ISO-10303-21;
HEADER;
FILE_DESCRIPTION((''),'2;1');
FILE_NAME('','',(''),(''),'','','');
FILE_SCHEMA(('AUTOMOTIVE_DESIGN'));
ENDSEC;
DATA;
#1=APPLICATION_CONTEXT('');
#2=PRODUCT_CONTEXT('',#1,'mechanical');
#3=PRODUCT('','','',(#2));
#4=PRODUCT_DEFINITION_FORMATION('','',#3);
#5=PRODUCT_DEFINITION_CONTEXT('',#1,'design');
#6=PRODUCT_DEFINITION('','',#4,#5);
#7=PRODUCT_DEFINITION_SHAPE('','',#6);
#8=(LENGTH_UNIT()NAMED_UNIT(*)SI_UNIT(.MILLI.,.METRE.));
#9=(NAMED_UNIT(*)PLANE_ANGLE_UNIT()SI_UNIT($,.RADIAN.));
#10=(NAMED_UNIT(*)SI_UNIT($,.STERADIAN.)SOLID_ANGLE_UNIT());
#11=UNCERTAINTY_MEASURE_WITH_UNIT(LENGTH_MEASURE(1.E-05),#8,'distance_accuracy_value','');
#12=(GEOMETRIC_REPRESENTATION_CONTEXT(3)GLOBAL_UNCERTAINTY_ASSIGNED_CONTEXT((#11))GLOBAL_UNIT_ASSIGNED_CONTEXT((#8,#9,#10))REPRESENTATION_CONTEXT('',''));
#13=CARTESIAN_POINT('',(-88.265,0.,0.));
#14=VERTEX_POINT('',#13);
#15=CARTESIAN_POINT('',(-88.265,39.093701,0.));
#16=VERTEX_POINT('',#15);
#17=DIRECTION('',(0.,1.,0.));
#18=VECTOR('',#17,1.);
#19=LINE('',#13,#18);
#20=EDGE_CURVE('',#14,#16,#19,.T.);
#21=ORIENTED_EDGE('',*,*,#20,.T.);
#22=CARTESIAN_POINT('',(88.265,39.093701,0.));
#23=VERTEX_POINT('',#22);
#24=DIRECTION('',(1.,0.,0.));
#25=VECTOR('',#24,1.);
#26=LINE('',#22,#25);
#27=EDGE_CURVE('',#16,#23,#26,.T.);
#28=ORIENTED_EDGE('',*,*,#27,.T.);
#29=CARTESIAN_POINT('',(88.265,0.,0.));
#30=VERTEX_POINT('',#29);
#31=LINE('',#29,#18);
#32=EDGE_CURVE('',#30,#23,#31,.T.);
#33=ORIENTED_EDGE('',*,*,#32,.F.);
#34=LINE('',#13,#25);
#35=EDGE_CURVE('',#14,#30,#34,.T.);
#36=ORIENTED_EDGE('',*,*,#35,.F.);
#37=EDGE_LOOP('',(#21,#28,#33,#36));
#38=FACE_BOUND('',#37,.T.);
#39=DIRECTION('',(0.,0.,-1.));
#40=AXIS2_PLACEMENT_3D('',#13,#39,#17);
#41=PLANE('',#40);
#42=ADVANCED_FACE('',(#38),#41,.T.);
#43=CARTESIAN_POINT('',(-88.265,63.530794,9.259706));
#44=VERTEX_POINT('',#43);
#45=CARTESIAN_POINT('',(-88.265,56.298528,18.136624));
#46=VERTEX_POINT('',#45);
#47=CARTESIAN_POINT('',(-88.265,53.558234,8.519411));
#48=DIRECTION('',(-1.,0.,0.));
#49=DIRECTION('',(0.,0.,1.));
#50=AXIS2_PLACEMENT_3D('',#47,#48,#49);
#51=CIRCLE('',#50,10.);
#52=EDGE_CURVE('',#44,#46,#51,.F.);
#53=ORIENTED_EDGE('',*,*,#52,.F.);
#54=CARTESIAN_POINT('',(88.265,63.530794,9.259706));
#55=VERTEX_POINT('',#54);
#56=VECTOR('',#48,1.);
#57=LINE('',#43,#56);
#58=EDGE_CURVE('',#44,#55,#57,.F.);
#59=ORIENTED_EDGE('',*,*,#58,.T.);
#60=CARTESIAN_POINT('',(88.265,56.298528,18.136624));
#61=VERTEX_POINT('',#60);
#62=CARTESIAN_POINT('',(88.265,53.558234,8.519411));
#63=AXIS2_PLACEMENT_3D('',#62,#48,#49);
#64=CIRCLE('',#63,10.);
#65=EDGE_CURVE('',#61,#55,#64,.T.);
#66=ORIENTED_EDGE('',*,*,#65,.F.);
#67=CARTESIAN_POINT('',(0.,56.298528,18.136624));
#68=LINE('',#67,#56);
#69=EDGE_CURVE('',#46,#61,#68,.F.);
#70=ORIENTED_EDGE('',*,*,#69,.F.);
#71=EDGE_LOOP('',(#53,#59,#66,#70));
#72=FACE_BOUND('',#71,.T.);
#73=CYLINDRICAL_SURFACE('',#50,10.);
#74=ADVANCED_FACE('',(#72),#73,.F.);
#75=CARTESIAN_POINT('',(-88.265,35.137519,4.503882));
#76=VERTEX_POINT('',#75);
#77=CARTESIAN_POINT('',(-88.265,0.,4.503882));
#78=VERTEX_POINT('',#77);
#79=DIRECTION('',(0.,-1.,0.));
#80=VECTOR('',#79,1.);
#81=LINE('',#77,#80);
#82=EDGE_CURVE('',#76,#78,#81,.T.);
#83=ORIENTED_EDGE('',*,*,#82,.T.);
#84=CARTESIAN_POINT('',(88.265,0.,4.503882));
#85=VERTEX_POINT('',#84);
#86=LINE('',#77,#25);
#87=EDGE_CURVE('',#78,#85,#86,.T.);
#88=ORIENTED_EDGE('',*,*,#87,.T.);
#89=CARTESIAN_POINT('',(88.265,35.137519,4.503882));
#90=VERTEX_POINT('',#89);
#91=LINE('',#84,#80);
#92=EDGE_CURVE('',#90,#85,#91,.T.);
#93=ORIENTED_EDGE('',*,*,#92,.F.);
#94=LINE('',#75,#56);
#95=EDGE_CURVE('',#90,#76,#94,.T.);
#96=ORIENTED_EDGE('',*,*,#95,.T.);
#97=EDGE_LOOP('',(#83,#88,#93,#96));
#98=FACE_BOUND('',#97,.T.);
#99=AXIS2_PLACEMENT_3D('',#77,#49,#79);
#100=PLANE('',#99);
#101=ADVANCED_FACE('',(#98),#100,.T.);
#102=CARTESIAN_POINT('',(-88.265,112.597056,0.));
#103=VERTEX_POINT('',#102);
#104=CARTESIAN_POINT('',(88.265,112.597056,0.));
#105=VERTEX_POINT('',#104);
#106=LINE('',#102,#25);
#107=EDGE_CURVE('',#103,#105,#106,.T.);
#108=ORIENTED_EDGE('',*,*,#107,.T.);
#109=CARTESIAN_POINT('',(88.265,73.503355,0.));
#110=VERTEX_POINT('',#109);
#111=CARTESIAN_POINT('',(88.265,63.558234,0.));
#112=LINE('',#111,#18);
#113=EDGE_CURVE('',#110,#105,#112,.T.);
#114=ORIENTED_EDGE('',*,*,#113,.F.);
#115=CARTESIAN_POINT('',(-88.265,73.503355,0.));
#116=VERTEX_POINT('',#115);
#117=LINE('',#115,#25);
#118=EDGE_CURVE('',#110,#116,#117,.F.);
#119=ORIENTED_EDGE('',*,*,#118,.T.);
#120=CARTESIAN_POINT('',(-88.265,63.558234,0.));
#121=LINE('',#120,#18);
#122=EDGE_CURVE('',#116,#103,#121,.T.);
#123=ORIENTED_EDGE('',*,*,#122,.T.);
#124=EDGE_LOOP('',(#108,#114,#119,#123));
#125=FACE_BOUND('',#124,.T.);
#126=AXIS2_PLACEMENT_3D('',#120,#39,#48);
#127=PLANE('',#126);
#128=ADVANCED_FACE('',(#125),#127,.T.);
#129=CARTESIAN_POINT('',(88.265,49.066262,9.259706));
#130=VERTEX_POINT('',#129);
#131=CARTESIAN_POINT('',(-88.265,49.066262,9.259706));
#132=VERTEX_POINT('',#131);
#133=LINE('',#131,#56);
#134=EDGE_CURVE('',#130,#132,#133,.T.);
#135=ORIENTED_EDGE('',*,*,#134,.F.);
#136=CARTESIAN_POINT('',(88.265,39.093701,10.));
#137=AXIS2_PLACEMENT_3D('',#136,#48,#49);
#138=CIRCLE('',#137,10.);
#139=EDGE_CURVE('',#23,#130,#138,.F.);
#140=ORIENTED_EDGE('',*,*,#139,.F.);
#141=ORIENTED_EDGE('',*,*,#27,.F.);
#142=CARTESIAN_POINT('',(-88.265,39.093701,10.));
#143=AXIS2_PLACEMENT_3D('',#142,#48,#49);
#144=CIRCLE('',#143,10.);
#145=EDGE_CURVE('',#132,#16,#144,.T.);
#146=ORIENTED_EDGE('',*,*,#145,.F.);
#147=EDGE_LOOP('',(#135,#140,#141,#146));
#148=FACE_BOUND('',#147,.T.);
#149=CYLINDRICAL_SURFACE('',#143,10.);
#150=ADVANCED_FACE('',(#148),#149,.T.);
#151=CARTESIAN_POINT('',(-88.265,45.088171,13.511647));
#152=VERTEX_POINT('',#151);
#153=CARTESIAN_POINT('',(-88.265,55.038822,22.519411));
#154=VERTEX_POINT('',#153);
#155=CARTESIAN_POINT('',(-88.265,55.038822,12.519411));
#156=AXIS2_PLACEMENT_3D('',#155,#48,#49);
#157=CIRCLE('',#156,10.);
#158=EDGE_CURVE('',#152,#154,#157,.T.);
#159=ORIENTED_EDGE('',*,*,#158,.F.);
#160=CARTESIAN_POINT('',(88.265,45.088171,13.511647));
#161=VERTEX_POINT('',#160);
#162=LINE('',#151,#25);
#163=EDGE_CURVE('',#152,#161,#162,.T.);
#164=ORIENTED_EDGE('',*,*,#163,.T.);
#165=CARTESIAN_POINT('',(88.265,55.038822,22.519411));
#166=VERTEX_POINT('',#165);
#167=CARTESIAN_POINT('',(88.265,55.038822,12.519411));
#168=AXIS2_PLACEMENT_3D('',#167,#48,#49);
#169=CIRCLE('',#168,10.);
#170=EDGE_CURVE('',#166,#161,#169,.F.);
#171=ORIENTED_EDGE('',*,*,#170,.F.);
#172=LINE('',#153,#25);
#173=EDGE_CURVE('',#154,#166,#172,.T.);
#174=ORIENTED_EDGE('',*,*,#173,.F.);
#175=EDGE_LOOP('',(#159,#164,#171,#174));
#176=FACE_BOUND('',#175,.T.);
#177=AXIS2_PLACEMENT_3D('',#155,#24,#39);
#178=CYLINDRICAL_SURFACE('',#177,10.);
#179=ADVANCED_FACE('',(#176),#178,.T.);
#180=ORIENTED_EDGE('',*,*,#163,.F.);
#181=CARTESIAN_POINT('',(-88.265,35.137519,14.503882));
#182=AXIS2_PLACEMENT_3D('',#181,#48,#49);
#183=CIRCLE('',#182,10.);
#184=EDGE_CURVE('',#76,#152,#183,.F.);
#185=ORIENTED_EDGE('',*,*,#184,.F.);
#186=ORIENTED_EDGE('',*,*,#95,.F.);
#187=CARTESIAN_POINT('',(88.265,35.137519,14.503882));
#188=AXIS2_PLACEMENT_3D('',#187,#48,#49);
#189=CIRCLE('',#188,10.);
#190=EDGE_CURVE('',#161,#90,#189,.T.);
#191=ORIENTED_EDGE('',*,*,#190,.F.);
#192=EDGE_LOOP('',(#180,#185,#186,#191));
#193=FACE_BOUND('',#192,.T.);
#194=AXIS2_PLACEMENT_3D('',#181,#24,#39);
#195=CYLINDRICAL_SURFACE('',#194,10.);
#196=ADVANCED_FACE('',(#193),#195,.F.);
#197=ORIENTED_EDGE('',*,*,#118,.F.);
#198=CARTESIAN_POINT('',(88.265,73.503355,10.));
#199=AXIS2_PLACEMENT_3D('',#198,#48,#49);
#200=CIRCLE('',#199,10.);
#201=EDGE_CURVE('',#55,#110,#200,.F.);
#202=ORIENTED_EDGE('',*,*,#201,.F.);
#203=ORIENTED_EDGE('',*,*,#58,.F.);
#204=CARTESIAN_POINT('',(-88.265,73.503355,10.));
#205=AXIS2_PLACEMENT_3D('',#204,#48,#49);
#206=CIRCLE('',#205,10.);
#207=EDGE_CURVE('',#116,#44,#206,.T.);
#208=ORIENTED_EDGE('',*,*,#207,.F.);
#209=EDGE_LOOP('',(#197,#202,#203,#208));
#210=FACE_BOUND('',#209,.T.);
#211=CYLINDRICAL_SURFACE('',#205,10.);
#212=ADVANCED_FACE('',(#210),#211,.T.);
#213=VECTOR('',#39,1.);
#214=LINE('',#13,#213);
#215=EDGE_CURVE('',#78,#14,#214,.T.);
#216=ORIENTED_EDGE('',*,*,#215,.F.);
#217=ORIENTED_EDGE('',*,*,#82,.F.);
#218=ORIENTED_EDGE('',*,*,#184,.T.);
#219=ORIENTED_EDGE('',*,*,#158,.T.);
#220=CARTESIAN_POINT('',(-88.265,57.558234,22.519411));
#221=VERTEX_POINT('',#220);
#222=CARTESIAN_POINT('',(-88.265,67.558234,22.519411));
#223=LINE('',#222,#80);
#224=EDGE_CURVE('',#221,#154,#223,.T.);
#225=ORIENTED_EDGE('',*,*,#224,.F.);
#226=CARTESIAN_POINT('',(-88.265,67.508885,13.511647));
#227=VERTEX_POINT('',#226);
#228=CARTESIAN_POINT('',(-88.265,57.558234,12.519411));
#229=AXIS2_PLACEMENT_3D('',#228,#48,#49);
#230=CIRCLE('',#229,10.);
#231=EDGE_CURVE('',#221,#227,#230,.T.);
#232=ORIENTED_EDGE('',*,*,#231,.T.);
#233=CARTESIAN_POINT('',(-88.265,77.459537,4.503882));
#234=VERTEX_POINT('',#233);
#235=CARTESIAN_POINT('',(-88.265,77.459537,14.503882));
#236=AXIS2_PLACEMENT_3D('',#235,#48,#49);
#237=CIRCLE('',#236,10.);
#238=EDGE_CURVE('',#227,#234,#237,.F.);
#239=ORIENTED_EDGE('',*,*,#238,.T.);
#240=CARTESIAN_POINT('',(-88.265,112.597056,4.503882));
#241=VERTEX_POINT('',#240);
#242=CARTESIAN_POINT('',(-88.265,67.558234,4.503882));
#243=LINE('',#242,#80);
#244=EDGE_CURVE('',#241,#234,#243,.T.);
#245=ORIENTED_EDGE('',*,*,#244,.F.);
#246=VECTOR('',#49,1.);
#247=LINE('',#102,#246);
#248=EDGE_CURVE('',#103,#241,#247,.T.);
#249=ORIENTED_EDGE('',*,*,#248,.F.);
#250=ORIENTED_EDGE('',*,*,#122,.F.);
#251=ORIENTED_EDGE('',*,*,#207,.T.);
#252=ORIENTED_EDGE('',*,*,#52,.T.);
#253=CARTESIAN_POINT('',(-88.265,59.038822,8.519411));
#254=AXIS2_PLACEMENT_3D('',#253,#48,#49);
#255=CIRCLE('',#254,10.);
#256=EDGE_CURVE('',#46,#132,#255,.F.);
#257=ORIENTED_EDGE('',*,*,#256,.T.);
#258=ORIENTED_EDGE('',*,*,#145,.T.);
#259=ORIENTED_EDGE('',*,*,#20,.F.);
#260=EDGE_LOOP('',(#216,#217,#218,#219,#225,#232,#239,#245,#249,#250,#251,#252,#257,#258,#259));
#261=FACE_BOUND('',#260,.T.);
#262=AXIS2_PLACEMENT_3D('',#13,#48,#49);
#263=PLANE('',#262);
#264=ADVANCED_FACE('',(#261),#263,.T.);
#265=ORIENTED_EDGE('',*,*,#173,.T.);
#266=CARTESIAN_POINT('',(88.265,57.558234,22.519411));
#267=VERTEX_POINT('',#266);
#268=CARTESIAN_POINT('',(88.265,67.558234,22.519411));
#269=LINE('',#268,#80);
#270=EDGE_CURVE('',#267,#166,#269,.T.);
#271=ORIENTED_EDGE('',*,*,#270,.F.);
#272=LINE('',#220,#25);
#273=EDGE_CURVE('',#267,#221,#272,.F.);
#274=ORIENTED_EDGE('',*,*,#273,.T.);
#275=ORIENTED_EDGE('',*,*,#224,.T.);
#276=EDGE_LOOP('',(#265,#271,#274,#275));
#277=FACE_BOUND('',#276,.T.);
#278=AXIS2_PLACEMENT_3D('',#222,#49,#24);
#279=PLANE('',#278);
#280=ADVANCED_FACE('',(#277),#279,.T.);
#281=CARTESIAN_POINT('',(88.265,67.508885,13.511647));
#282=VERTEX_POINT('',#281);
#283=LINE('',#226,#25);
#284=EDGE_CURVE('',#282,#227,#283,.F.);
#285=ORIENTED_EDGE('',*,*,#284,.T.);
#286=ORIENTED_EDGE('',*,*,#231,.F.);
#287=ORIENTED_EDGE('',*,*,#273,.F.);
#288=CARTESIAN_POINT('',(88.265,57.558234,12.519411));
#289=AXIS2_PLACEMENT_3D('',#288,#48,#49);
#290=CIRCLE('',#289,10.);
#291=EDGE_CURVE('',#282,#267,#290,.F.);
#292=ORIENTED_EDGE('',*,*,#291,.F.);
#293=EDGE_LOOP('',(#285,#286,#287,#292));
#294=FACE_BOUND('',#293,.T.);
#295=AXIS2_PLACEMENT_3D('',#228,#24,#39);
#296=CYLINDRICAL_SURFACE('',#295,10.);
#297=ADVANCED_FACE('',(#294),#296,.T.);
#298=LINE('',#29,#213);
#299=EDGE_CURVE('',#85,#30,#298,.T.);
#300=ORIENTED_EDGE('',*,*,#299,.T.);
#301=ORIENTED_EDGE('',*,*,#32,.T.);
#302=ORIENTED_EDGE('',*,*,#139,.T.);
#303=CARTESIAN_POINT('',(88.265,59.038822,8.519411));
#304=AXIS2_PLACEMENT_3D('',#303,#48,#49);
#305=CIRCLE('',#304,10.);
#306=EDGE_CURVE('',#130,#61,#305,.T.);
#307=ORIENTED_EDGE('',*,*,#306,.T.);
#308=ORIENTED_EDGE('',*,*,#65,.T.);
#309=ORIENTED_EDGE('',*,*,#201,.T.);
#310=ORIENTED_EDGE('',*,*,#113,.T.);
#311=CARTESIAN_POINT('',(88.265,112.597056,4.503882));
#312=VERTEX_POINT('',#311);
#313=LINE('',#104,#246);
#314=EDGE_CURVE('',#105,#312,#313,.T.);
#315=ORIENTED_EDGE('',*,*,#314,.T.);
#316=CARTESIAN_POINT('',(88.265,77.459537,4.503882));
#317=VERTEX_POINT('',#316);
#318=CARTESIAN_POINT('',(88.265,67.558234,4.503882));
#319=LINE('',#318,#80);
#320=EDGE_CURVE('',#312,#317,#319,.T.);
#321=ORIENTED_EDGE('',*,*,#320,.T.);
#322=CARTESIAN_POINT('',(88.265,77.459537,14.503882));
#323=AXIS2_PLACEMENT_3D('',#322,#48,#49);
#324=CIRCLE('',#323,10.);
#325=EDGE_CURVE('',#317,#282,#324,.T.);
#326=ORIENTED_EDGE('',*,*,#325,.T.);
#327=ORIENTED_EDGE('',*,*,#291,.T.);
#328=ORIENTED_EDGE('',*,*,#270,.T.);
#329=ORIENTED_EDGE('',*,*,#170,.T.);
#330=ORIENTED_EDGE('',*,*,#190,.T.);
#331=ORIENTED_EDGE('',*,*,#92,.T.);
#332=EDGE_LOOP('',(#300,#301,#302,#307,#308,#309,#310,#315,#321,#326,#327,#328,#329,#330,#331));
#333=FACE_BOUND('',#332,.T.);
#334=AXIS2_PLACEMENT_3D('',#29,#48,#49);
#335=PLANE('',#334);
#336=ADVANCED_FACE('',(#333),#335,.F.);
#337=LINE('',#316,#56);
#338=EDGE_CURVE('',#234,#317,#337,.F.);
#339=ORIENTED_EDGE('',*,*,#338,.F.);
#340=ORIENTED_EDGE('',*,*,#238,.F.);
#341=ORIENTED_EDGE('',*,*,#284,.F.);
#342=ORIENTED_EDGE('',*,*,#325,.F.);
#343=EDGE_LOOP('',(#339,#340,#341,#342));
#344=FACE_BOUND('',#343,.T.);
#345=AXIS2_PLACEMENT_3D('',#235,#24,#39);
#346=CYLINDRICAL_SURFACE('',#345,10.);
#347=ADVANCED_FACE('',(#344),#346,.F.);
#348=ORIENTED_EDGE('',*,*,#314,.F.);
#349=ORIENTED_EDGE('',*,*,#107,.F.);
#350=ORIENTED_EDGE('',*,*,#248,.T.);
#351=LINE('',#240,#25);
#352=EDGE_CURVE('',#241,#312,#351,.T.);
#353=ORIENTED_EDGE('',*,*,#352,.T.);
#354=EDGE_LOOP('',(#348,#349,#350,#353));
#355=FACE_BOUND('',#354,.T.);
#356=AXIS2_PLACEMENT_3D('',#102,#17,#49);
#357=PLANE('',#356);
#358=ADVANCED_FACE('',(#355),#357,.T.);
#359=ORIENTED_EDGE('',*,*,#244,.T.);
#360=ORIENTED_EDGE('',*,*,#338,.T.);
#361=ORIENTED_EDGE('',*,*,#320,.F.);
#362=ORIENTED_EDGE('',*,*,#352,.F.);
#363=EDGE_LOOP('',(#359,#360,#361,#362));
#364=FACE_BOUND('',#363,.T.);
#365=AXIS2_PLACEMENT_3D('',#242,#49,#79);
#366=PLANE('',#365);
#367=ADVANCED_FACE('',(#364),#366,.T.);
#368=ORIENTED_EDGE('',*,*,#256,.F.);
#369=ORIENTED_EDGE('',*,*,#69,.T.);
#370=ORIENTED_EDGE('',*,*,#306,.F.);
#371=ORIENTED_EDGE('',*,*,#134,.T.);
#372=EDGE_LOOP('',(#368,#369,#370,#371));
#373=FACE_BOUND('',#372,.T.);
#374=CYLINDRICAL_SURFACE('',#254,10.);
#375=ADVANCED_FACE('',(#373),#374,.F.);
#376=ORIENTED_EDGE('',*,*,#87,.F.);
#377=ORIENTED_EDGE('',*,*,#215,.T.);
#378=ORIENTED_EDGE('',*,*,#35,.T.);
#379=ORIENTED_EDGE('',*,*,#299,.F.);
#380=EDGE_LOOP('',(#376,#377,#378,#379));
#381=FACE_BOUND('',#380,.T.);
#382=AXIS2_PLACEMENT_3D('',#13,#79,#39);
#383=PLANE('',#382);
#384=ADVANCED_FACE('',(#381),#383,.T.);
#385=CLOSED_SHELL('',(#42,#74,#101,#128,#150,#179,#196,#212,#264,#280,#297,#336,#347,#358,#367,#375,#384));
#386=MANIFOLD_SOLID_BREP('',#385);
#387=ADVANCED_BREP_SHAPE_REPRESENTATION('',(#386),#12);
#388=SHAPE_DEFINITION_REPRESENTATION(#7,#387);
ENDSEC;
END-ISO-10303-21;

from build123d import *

# Parameters (mm, degrees)
SM_START               = -88.265
SM_BASE_FLANGE_1_DEPTH = 176.53
FILLET_3_R             = 10
FILLET_4_R             = 10
FILLET_5_R             = 10
FILLET_6_R             = 10
FILLET_7_R             = 10


# Read off the part's stored shape, not the designer's step: 基体-法兰1
with BuildPart() as part:
    # 基体-法兰1 outline → 基体-法兰1 (new body)
    with BuildSketch(Plane(origin=(0, 0, 0), x_dir=(0, 0, -1), z_dir=(1, 0, 0)).offset(SM_START)):
        Polygon((-4.503882243, 0), (0, 0), (0, 49.038822429), (-18.519411214, 49.038822429), (-18.519411214, 63.558233643), (0, 63.558233643), (0, 112.597056072), (-4.503882243, 112.597056072), (-4.503882243, 67.558233643), (-22.519411214, 67.558233643), (-22.519411214, 45.038822429), (-4.503882243, 45.038822429), align=None)
    extrude(amount=SM_BASE_FLANGE_1_DEPTH)

    # 圆角3
    fillet_3_edges = [part.edges().sort_by_distance(p)[0] for p in [
        (0, 45.038822429, 22.519411214),
        (0, 67.558233643, 22.519411214),
    ]]
    fillet(fillet_3_edges, radius=FILLET_3_R)

    # 圆角4
    # the kernel refuses this fillet: 10 mm, written as the material it adds along each edge
    with BuildSketch(Plane(origin=(-88.265, 49.038822429, 18.519411214), x_dir=(0, 1, 0), z_dir=(1, 0, 0)), Plane(origin=(-88.265, 63.558233643, 18.519411214), x_dir=(0, 0, -1), z_dir=(1, 0, 0))) as fillet_4_piece_1:
        with BuildLine():
            CenterArc((FILLET_4_R, -FILLET_4_R), FILLET_4_R, 90, 90)
            Line((0, -FILLET_4_R), (0, 0))
            Line((0, 0), (FILLET_4_R, 0))
        make_face()
    extrude(amount=176.53)

    # 圆角5
    fillet_5_edges = [part.edges().sort_by_distance(p)[0] for p in [
        (0, 63.558233643, 0),
        (0, 49.038822429, 0),
    ]]
    fillet(fillet_5_edges, radius=FILLET_5_R)

    # 圆角6
    fillet_6_edges = [part.edges().sort_by_distance(p)[0] for p in [
        (0, 45.038822429, 4.503882243),
    ]]
    fillet(fillet_6_edges, radius=FILLET_6_R)

    # 圆角7
    fillet_7_edges = [part.edges().sort_by_distance(p)[0] for p in [
        (0, 67.558233643, 4.503882243),
    ]]
    fillet(fillet_7_edges, radius=FILLET_7_R)


solid = part.part
